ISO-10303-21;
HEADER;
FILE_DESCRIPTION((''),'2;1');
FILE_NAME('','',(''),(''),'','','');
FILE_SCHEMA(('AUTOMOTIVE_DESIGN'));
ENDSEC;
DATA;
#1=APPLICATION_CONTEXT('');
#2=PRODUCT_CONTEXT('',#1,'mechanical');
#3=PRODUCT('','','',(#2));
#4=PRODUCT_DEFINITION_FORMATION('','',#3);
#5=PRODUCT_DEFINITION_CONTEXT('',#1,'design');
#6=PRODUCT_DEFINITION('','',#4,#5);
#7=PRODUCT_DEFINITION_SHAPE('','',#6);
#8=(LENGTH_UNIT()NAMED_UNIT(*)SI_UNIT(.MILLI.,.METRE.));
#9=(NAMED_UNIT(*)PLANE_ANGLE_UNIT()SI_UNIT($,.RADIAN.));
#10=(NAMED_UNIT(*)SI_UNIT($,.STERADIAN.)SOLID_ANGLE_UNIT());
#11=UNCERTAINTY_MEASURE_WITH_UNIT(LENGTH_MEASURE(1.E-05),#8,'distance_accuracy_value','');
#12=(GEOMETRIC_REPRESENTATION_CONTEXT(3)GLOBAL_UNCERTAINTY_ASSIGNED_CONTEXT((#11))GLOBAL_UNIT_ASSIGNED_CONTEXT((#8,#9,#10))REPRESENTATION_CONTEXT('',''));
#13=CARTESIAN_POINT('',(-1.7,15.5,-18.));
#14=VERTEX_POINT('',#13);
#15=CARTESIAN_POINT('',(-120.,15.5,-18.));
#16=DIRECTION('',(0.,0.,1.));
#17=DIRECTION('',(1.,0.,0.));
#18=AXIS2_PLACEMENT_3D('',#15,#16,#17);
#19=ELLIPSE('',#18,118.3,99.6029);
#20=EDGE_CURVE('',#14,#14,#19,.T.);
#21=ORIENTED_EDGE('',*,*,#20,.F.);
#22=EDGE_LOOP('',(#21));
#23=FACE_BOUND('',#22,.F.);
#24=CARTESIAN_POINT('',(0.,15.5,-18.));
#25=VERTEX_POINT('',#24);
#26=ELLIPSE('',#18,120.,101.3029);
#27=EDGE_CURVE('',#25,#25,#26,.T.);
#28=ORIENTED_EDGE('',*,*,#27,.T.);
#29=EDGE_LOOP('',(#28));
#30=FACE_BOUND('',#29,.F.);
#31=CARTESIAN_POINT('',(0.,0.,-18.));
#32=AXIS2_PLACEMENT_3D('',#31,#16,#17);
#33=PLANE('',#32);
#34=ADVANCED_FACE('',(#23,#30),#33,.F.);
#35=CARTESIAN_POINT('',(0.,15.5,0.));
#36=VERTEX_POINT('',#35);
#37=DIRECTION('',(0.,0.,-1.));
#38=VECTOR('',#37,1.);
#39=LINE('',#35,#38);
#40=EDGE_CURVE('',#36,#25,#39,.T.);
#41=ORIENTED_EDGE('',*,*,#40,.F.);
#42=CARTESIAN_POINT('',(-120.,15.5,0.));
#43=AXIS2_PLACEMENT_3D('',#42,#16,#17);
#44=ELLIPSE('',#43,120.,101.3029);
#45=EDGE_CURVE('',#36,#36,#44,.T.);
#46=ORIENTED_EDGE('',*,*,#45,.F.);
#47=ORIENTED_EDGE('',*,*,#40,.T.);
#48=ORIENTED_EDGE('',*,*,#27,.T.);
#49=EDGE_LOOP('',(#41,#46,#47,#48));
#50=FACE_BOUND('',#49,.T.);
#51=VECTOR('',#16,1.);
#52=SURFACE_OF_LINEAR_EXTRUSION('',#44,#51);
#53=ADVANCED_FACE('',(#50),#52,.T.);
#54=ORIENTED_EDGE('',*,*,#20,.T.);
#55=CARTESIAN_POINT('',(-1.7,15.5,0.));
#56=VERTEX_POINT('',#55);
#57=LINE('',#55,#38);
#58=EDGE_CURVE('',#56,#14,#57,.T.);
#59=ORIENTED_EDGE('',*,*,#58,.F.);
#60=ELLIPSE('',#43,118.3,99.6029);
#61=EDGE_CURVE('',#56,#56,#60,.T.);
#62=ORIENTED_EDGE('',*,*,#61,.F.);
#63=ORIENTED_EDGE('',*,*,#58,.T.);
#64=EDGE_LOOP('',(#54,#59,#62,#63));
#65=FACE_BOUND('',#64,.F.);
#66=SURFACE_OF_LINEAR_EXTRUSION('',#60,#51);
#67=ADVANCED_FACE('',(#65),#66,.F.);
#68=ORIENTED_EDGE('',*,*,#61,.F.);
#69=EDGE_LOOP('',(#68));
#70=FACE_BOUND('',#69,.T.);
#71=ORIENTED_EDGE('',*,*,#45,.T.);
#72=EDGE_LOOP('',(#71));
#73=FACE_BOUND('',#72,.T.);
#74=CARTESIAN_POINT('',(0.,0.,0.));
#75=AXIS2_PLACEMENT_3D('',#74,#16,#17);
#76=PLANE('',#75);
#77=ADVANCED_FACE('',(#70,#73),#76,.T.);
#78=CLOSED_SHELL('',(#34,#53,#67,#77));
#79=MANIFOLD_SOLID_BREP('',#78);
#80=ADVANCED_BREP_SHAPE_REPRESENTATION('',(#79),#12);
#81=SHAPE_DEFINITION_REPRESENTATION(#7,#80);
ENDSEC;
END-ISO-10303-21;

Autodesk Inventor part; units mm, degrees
ref_plane "YZ Plane" through (0, 0, 0) normal (1, 0, 0) x (0, 1, 0)
ref_plane "XZ Plane" through (0, 0, 0) normal (0, 1, 0) x (-1, 0, 0)
ref_plane "XY Plane" through (0, 0, 0) normal (0, 0, 1) x (1, 0, 0)
sketch "Sketch1" plane through (0, 0, 0) normal (0, 0, 1) x (1, 0, 0)
  line L0 (0, 0) -> (0, 31) projected
  line L1 (0, 15.5) -> (-120, 15.5)
  ellipse E0 centre (-120, 15.5) end of major axis (0, 15.5) minor radius 101.3029
  ellipse E1 centre (-120, 15.5) end of major axis (-1.7, 15.5) minor radius 99.6029
  dimension "d0" = 120
extrude "Extrusion1" add sketch "Sketch1" against normal blind 18
properties part number "mounting_ring"
